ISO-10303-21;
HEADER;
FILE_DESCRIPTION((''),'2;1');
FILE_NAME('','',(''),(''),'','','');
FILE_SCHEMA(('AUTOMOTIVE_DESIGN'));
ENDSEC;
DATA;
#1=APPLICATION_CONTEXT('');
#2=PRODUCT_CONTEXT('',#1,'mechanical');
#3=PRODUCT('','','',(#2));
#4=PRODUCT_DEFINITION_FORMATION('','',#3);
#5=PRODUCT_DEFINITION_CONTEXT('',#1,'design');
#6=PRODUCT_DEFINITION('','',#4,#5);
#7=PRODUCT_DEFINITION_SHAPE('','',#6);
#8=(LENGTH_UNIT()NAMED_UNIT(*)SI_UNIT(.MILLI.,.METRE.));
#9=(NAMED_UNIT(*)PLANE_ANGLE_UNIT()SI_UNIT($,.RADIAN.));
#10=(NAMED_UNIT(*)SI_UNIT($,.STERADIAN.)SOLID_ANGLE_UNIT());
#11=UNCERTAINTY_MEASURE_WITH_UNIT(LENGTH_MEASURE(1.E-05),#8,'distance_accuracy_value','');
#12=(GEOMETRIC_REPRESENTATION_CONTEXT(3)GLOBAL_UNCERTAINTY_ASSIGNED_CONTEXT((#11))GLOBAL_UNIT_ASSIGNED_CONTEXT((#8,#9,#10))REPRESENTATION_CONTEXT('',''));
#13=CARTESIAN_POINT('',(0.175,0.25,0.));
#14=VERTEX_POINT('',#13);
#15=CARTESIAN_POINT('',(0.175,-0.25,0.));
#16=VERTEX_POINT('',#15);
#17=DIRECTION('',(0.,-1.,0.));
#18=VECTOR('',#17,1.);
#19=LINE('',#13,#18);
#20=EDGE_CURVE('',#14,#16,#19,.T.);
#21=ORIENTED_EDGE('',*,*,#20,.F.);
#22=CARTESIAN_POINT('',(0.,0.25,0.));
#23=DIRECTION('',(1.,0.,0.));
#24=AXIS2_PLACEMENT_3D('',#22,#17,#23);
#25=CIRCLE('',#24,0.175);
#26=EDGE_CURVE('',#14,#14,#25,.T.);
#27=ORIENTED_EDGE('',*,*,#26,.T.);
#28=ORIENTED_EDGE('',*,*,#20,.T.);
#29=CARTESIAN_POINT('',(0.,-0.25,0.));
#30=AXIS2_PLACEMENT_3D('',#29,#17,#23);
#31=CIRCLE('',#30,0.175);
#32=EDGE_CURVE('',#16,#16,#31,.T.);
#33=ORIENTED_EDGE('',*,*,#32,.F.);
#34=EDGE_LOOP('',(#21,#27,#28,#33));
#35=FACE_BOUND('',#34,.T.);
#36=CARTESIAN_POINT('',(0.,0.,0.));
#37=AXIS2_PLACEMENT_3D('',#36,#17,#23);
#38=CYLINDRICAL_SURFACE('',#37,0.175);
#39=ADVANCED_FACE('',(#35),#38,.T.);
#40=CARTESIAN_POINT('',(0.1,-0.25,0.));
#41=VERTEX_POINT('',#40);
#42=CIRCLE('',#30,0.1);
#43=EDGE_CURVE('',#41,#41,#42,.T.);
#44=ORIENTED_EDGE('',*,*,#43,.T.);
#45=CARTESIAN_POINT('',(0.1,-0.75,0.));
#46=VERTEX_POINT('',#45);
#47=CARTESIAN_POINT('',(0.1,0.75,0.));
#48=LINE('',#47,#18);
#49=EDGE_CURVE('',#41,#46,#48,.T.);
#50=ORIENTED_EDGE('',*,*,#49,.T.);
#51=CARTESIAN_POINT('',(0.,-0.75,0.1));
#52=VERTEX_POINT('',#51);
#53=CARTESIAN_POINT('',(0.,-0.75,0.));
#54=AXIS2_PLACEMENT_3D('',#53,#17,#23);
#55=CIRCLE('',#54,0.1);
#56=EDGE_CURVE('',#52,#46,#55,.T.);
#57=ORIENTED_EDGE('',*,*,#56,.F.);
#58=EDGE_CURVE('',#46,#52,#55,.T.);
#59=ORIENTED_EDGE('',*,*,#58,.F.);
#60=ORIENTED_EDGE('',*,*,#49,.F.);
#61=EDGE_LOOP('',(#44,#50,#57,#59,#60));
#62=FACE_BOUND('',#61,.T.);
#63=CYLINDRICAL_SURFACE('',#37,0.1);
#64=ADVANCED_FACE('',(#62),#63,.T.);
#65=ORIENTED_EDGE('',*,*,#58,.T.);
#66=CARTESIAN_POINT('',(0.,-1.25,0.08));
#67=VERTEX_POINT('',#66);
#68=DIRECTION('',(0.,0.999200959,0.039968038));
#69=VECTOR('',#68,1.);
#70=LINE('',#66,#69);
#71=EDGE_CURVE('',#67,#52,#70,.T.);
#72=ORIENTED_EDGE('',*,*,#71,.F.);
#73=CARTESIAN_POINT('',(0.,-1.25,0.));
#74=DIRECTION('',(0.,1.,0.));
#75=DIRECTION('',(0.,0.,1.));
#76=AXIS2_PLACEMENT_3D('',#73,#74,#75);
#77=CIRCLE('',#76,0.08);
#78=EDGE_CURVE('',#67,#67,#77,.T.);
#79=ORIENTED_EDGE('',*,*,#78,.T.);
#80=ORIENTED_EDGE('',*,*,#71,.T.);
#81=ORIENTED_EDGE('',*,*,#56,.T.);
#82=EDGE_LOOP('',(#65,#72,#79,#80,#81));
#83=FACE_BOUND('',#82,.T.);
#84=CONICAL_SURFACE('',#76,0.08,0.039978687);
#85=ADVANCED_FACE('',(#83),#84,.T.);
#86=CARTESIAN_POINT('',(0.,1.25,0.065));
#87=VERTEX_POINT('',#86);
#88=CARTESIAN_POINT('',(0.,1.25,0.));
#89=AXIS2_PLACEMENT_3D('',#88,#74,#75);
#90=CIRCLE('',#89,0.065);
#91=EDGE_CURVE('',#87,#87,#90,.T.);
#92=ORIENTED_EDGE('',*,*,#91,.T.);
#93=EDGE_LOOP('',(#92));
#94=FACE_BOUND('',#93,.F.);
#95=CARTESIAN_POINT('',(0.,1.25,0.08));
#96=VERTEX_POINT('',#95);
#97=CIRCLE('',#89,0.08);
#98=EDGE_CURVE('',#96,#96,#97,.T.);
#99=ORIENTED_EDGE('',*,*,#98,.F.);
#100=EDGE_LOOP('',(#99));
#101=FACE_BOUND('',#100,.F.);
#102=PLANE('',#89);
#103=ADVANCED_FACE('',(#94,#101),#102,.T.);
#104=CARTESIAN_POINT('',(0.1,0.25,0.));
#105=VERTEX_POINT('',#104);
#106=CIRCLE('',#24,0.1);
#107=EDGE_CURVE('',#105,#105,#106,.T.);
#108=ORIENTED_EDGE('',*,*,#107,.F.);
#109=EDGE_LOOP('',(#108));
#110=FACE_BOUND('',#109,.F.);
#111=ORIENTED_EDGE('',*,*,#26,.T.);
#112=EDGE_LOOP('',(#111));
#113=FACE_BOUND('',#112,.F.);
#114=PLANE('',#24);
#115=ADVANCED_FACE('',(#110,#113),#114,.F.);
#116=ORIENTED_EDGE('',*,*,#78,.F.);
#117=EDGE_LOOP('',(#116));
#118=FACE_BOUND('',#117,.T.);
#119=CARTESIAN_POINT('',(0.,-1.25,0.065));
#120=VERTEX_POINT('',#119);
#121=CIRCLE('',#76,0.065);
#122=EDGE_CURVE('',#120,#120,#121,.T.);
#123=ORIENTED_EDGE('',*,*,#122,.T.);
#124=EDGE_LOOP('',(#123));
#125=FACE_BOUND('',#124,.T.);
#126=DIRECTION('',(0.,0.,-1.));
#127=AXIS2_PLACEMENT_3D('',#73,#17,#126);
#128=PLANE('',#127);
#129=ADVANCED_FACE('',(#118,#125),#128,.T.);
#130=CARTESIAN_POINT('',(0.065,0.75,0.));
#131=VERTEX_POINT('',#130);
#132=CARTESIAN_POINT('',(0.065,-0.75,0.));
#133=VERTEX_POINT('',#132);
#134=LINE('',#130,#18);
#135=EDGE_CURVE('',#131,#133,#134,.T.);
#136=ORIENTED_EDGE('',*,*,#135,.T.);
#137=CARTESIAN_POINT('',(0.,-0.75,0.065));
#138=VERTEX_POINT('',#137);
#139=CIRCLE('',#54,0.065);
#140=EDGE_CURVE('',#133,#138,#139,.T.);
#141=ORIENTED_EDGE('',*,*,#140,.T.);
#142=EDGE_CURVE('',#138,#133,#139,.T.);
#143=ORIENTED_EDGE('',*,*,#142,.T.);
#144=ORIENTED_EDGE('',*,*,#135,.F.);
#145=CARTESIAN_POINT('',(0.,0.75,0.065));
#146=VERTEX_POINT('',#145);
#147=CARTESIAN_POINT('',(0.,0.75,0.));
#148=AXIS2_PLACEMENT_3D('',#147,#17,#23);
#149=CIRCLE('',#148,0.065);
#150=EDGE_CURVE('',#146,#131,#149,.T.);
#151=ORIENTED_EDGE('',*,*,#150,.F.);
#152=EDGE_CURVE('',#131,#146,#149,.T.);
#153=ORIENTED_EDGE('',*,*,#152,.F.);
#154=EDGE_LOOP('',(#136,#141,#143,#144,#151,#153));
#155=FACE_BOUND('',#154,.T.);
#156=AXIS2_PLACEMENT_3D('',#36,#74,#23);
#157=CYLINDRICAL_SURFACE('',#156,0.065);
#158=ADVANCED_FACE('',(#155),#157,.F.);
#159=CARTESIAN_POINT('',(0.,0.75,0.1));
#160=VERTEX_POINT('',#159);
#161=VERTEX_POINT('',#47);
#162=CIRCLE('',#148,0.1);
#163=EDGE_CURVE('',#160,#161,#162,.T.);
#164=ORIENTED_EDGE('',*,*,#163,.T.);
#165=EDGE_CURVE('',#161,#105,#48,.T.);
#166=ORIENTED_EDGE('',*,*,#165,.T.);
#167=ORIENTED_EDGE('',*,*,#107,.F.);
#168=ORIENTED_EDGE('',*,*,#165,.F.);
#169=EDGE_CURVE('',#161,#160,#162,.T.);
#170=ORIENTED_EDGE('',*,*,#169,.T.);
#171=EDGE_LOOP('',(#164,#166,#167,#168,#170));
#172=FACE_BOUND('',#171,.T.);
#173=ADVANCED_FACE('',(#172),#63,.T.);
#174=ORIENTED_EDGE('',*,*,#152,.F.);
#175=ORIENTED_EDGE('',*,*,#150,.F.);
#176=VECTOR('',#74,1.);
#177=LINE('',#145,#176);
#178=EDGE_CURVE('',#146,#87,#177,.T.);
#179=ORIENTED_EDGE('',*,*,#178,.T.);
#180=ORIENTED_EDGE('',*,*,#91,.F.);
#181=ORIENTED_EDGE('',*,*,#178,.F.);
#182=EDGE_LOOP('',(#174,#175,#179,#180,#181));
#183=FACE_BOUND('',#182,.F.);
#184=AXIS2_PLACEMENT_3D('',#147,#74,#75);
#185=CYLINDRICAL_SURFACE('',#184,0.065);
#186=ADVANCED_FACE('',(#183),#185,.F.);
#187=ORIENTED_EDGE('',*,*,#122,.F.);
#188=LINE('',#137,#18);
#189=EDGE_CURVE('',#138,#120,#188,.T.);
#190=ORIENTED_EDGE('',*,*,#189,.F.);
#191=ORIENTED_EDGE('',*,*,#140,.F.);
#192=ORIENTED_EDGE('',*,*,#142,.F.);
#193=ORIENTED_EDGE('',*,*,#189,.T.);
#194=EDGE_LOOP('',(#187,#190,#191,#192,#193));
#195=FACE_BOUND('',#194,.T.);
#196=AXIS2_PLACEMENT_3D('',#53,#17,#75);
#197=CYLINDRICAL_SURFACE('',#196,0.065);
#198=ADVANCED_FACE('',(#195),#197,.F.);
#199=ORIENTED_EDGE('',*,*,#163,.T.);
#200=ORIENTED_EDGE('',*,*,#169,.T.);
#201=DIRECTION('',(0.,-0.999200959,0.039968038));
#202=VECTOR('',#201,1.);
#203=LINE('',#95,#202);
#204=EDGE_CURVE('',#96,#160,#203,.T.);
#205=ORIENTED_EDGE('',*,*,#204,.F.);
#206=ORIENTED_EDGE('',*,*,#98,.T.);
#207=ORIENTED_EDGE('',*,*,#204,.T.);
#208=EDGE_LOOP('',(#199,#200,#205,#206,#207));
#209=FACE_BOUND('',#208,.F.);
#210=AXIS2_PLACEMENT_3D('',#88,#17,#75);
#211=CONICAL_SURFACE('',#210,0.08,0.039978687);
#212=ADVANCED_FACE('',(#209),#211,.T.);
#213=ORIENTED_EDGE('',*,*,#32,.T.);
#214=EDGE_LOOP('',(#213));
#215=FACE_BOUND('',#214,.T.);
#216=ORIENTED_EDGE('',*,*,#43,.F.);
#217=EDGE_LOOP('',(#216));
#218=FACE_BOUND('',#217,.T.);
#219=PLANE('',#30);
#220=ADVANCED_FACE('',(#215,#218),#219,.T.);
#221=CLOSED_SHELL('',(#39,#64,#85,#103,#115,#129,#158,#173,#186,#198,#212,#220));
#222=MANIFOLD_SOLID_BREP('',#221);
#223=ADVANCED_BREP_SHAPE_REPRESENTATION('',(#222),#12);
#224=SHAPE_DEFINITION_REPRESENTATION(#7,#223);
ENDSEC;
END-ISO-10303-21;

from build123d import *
from build123d import SkipClean  # not in build123d's __all__

# Parameters (mm, degrees)
F0_R     = 0.175
F0_R_2   = 0.1
F0_R_3   = 0.065
F1_DEPTH = 0.25
F2_DEPTH = 0.75


with BuildPart() as f1:
    # F0 (on Front) → F1 (new body, symmetric)
    with BuildSketch(Plane.XZ):
        Circle(F0_R)
        Circle(F0_R_2, mode=Mode.SUBTRACT)
        Circle(F0_R_2)
        Circle(F0_R_3, mode=Mode.SUBTRACT)
    extrude(amount=F1_DEPTH, both=True)

    # F0 (on Front) → F2 (join, symmetric)
    with BuildSketch(Plane.XZ):
        Circle(F0_R_2)
        Circle(F0_R_3, mode=Mode.SUBTRACT)
    extrude(amount=F2_DEPTH, both=True)

    # F3 (on Right) → F4 (revolve)
    with BuildSketch(Plane.YZ):
        Polygon((0.75, 0.065), (1.25, 0.065), (1.25, 0.08), (0.75, 0.1), align=None)
    with SkipClean():  # cleaning this boolean's faces spoils the solid; the shape is the same uncleaned
        revolve(axis=Axis((0, 0.625, 0), (0, 1, 0)))

    # F5: F1 across plane


with BuildPart() as f1_1:
    add(f1.part, clean=False)
    with SkipClean():  # cleaning this boolean's faces spoils the solid; the shape is the same uncleaned
        add(f1.part.mirror(Plane.XZ), clean=False)


solid = f1_1.part
